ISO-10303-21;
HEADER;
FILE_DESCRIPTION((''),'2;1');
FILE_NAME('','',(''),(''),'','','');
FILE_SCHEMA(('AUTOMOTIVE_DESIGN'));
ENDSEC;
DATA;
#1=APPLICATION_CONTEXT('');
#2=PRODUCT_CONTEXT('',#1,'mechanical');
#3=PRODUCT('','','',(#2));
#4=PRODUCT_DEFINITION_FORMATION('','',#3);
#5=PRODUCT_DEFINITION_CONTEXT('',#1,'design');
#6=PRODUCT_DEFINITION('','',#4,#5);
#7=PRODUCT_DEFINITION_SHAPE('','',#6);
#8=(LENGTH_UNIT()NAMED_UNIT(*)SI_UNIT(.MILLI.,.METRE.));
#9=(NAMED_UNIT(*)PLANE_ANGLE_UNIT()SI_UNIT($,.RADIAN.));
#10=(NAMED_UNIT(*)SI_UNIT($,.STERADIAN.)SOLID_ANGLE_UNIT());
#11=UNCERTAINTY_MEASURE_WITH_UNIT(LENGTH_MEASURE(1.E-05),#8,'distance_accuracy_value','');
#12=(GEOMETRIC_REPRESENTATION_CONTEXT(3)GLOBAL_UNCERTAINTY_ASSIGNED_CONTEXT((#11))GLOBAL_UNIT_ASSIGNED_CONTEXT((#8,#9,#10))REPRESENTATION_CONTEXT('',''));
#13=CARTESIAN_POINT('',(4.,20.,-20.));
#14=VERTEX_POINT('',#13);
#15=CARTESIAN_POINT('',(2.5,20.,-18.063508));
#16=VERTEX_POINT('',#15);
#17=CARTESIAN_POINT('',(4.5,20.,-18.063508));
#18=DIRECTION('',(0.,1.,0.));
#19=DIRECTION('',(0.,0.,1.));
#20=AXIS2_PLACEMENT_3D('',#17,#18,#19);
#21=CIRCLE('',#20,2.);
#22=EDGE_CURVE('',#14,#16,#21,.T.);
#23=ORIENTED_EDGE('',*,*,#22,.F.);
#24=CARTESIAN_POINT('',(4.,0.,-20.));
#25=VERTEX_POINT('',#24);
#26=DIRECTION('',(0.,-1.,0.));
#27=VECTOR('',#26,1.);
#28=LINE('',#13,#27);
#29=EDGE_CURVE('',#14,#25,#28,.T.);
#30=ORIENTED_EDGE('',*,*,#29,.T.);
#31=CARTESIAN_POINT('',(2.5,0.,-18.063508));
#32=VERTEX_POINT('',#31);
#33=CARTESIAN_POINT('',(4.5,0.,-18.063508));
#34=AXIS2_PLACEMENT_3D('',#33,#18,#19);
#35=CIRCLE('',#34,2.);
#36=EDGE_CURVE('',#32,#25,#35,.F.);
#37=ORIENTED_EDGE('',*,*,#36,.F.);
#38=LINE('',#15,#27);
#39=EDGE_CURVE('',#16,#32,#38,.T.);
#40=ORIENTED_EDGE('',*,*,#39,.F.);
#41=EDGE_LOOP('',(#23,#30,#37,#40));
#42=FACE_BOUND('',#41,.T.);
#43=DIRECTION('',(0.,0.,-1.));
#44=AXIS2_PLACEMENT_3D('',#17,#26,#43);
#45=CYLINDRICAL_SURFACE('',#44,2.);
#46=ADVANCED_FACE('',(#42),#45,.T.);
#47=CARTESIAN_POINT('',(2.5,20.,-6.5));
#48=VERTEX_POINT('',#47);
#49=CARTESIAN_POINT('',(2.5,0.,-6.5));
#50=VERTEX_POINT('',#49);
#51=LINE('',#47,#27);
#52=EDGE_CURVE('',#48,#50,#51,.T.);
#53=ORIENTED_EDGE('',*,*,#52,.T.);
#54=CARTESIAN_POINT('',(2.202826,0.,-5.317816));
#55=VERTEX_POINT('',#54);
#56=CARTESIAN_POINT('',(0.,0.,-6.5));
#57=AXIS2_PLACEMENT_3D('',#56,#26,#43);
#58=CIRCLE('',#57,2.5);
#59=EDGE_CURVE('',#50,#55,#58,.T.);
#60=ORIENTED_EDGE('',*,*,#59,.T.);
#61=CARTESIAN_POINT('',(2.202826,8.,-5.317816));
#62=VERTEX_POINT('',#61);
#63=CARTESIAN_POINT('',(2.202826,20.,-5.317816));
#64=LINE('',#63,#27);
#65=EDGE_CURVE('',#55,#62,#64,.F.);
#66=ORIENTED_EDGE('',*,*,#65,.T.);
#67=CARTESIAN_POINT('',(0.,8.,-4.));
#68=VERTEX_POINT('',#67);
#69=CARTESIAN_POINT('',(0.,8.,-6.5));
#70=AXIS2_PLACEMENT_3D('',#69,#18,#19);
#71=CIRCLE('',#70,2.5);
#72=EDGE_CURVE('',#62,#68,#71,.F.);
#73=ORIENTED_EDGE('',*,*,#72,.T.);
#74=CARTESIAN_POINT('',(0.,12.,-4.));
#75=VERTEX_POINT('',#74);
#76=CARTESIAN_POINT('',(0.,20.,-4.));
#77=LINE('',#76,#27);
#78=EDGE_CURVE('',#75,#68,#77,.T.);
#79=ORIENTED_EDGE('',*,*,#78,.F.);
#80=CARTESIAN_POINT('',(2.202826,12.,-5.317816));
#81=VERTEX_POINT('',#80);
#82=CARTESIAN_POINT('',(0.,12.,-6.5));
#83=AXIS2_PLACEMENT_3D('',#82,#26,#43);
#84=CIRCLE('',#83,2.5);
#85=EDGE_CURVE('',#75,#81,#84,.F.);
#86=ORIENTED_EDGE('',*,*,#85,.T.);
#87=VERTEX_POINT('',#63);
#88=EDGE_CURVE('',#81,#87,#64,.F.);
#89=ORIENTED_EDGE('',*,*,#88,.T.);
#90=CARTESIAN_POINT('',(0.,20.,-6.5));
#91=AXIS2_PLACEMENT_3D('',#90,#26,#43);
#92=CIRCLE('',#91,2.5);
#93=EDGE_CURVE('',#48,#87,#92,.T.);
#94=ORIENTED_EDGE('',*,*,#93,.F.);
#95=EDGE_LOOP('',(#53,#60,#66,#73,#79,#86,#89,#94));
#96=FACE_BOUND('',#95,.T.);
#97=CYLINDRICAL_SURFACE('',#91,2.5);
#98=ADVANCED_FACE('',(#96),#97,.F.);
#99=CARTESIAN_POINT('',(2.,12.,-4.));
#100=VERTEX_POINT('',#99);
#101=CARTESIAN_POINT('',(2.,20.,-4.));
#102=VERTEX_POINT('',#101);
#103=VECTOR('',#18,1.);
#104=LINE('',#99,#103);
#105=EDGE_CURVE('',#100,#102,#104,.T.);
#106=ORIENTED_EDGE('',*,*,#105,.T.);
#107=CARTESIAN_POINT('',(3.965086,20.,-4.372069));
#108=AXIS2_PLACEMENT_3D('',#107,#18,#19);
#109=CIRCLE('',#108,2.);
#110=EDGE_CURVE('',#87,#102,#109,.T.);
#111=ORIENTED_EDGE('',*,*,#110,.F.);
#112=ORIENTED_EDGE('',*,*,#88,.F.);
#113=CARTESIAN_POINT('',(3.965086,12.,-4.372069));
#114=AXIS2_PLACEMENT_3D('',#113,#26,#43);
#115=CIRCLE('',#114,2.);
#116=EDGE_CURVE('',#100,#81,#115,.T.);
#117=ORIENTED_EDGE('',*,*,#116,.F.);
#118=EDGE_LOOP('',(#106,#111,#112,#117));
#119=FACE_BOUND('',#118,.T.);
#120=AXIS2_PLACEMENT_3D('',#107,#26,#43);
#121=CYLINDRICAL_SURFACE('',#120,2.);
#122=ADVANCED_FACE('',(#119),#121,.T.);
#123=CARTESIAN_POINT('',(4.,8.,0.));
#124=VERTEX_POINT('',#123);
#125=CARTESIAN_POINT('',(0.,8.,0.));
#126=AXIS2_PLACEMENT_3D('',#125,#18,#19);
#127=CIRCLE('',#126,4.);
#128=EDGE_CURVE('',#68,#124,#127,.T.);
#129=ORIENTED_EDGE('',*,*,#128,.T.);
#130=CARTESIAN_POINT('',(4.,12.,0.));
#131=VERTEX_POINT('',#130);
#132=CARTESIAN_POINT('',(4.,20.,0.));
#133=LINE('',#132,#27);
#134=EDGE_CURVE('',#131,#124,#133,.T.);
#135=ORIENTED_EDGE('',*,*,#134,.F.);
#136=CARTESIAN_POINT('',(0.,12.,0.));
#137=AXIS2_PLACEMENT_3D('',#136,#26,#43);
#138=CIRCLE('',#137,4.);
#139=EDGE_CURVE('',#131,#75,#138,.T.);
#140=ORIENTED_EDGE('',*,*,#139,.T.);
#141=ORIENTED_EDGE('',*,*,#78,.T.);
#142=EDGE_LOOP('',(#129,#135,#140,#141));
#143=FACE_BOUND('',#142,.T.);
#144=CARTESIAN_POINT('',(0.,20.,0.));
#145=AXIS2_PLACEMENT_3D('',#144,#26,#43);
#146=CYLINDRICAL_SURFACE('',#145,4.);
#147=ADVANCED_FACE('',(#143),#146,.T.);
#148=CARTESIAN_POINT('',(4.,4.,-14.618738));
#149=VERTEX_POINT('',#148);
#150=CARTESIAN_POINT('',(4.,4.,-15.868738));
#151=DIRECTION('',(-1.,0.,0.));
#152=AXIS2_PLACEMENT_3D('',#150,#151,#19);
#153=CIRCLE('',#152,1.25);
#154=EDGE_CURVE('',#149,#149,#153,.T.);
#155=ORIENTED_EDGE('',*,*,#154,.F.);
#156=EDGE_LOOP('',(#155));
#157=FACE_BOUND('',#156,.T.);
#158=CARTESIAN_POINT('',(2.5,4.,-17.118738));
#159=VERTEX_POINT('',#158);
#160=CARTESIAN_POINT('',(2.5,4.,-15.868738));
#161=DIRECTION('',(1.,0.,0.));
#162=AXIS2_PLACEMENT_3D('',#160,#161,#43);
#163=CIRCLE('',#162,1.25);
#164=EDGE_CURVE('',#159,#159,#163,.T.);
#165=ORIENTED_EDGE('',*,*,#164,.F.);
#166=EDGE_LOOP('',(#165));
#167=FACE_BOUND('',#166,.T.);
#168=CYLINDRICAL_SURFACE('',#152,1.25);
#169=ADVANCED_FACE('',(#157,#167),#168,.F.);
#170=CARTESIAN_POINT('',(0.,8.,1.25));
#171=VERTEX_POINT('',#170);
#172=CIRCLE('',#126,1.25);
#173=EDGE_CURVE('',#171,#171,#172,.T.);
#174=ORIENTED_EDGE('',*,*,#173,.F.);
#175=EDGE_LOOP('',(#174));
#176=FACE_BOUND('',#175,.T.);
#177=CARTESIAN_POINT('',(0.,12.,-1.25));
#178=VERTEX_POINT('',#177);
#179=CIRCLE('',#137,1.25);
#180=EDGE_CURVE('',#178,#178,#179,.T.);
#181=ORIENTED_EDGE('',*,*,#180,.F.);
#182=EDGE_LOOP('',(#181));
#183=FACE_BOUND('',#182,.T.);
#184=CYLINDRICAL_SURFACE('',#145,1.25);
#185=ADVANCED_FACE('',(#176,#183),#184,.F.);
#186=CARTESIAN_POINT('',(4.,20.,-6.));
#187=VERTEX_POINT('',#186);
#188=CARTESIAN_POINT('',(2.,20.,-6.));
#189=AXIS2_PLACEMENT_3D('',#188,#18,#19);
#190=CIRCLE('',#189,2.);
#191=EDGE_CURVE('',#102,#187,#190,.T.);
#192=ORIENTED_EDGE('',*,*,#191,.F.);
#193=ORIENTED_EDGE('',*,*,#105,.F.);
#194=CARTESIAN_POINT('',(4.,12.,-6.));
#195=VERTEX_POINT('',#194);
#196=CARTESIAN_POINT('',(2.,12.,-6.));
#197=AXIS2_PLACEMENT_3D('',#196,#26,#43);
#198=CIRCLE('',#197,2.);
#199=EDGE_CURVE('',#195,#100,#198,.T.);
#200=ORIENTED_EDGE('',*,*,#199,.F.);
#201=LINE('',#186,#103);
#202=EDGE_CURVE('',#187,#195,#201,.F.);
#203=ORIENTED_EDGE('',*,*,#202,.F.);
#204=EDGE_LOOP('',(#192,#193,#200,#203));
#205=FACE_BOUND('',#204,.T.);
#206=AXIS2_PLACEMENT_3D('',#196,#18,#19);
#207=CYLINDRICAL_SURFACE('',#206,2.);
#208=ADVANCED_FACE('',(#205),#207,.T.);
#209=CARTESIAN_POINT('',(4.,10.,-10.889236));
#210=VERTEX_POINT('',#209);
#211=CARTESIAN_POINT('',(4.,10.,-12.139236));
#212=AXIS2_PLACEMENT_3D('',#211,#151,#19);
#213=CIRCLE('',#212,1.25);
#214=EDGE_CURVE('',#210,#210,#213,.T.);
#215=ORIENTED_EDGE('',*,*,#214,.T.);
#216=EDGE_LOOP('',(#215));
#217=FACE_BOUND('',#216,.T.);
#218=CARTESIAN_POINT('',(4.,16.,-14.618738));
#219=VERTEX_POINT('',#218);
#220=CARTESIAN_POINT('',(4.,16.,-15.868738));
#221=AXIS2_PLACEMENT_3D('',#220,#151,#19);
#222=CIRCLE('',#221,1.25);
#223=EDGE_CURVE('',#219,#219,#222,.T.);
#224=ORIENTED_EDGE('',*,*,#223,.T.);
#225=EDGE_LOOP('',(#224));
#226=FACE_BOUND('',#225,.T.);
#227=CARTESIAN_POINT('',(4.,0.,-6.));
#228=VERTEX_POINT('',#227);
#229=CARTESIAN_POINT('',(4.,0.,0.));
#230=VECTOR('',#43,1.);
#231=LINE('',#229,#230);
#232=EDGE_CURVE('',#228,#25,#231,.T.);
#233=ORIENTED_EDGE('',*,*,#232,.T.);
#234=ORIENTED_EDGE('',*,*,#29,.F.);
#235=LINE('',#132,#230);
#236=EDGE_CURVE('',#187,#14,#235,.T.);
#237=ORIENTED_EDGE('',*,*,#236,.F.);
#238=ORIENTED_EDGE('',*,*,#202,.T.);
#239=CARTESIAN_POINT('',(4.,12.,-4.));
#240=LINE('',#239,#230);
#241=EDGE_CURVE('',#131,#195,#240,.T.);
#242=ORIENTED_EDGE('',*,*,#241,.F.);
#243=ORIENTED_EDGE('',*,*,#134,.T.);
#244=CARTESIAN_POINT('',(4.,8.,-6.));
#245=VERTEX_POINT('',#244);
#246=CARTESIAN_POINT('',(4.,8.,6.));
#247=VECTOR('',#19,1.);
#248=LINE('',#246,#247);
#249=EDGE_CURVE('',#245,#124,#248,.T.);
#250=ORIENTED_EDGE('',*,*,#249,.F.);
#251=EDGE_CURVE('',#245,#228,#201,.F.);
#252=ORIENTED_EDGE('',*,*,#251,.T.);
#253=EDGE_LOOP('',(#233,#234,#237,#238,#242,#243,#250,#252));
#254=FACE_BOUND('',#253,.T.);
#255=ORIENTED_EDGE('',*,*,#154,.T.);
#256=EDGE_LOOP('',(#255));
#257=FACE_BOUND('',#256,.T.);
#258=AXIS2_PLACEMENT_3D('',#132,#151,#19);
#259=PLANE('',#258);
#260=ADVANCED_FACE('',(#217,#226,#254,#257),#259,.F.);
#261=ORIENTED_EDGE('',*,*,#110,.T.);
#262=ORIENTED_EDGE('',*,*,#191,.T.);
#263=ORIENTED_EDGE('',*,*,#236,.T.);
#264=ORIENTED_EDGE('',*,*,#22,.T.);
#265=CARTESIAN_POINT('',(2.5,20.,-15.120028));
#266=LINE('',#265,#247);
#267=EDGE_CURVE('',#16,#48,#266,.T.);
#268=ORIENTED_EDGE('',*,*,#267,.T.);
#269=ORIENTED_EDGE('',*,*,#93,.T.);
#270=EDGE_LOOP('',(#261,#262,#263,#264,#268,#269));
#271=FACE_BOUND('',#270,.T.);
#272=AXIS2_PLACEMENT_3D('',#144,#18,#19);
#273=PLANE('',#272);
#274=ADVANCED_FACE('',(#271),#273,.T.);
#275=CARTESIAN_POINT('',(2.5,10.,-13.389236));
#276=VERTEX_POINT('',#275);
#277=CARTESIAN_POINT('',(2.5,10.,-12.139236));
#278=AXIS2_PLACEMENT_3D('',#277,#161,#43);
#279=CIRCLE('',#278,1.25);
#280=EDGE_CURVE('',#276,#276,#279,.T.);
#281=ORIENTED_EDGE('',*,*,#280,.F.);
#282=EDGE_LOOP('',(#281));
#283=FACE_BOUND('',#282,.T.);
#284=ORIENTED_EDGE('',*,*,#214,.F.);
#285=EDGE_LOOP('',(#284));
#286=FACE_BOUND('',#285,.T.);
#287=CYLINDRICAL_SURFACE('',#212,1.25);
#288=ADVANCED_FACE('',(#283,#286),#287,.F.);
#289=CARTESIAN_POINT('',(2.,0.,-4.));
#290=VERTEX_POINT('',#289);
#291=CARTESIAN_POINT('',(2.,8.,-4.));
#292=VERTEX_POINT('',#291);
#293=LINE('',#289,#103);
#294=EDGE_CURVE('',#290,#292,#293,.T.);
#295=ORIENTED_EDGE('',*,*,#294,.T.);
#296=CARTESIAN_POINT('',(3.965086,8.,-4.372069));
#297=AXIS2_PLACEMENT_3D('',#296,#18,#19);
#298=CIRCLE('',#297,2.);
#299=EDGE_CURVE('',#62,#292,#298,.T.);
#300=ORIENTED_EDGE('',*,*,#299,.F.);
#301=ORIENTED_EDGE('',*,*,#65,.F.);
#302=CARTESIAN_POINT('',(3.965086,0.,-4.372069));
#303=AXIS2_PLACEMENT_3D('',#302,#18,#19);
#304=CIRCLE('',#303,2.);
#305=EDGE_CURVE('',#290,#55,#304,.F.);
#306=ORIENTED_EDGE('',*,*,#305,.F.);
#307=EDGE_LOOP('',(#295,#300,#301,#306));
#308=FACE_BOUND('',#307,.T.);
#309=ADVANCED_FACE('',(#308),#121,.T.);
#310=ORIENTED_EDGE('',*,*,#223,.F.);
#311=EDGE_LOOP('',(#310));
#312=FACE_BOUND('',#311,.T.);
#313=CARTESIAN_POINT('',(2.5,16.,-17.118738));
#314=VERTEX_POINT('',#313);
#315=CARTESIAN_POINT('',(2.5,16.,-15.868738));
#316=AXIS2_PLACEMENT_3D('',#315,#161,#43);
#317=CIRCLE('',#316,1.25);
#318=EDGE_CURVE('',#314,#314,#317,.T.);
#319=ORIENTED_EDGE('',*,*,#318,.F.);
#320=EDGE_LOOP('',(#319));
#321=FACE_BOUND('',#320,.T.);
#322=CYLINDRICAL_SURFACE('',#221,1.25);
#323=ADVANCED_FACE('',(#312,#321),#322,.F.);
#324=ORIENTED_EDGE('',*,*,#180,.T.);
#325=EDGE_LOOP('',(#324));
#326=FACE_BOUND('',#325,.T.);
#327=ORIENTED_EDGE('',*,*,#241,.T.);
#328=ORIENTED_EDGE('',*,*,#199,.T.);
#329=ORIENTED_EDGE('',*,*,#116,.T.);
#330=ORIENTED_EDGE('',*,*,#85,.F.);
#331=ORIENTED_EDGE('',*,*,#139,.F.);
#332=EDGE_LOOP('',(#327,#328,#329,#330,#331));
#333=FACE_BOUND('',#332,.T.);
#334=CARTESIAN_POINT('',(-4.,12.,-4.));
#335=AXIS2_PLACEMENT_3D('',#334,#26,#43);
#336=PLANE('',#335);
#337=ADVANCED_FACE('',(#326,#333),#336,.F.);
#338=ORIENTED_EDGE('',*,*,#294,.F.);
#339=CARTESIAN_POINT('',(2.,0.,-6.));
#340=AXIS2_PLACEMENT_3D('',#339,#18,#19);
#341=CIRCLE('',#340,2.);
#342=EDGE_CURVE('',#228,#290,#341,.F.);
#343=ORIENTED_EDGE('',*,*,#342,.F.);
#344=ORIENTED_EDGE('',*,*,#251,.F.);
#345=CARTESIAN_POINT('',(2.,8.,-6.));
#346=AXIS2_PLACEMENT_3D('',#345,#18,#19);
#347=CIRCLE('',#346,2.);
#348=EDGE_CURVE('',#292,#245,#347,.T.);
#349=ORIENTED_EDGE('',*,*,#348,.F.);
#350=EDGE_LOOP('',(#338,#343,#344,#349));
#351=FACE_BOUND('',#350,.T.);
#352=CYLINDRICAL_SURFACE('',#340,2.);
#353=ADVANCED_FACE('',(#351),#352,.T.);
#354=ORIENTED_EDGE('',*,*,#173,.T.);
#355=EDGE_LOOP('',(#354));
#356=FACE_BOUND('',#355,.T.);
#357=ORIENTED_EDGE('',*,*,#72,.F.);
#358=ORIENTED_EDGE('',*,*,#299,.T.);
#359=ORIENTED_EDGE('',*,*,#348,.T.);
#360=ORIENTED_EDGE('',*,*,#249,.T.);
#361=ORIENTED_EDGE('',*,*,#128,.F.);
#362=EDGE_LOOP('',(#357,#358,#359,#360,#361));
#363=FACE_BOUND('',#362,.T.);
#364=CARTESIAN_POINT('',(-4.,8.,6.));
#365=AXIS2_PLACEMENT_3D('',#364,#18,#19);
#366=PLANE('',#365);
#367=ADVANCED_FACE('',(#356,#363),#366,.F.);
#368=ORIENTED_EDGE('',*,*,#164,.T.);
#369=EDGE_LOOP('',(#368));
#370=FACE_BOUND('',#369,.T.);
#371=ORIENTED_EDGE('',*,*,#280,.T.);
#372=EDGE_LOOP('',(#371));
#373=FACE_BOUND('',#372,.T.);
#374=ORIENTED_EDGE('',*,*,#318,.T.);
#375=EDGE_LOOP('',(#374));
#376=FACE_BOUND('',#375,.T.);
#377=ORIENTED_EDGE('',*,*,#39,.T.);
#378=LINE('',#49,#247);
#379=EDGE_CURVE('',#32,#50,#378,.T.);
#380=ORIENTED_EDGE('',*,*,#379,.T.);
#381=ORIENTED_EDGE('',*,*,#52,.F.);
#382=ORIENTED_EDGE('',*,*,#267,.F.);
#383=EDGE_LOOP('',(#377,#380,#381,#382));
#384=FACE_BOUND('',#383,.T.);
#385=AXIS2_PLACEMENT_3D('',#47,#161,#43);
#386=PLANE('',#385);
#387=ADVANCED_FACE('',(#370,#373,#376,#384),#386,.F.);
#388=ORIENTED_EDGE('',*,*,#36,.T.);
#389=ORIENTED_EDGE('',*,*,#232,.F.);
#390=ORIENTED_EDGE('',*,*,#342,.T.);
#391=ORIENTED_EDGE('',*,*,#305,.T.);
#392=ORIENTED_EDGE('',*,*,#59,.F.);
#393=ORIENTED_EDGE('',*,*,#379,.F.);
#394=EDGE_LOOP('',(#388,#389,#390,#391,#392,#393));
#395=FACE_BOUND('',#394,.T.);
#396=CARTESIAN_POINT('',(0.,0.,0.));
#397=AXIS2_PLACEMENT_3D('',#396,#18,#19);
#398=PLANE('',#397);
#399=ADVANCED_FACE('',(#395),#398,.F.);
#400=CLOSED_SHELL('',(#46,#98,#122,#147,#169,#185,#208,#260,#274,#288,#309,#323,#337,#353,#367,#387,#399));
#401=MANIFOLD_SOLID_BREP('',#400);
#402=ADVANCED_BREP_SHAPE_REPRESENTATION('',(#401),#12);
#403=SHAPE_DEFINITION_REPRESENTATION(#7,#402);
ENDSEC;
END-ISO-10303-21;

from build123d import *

# Parameters (mm, degrees)
SKETCH1_R               = 1.25
BOSS_EXTRUDE1_DEPTH     = 20
CUT_EXTRUDE1_DEPTH      = 30.021543722
CUT_EXTRUDE1_DEPTH_BACK = 30.021543722
SKETCH2_R               = 1.25
CUT_EXTRUDE3_DEPTH      = 29.565713714
CUT_EXTRUDE3_DEPTH_BACK = 29.565713714
SKETCH3_W               = 10
SKETCH3_H               = 8
SKETCH3_W_2             = 9.357078711
FILLET3_R               = 2
FILLET4_R               = 2
FILLET8_R               = 2
FILLET9_R               = 2
FILLET11_R              = 2


with BuildPart() as part:
    # Sketch1 → Boss-Extrude1 (new body)
    with BuildSketch(Plane(origin=(0, 0, 0), x_dir=(1, 0, 0), z_dir=(0, 1, 0))):
        with BuildLine():
            Line((4, 0), (4, 20))
            Line((4, 20), (2.5, 20))
            Line((2.5, 20), (2.5, 15.120027663))
            Line((2.5, 15.120027663), (2.5, 6.5))
            ThreePointArc((2.5, 6.5), (1.767766953, 4.732233047), (0, 4))
            ThreePointArc((0, 4), (-2.828427125, -2.828427125), (4, 0))
        make_face()
        with Locations(Location((0, 0, 0), (0, 0, 270))):
            Circle(SKETCH1_R, mode=Mode.SUBTRACT)
    extrude(amount=BOSS_EXTRUDE1_DEPTH)

    # Sketch2 → Cut-Extrude1 (cut, two sides: drawn at the far end of the back side and taken through both)
    with BuildSketch(Plane.ZY.offset(-2.5).offset(-CUT_EXTRUDE1_DEPTH_BACK)):
        with Locations((-12.139236455, 10)):
            Circle(SKETCH2_R)
        with Locations((-15.86873762, 4)):
            Circle(SKETCH2_R)
        with Locations((-15.86873762, 16)):
            Circle(SKETCH2_R)
    extrude(amount=CUT_EXTRUDE1_DEPTH + CUT_EXTRUDE1_DEPTH_BACK, mode=Mode.SUBTRACT)

    # Sketch3 → Cut-Extrude3 (cut, two sides: drawn at the far end of the back side and taken through both)
    with BuildSketch(Plane(origin=(0, 0, 0), x_dir=(0, 0, -1), z_dir=(1, 0, 0)).offset(-CUT_EXTRUDE3_DEPTH_BACK)):
        with Locations((-1, 4)):
            Rectangle(SKETCH3_W, SKETCH3_H)
        with Locations((-0.678539356, 16)):
            Rectangle(SKETCH3_W_2, SKETCH3_H)
    extrude(amount=CUT_EXTRUDE3_DEPTH + CUT_EXTRUDE3_DEPTH_BACK, mode=Mode.SUBTRACT)

    # Fillet3
    fillet3_edges = [part.edges().sort_by_distance(p)[0] for p in [
        (4, 16, -4),
    ]]
    fillet(fillet3_edges, radius=FILLET3_R)

    # Fillet4
    # the kernel refuses this fillet: 2 mm, written as the material it takes off along each edge
    with BuildSketch(Plane(origin=(0, 12, -4), x_dir=(0.8581589387978472, 0, -0.513384101586086), z_dir=(0, 1, 0))) as fillet4_piece_1:
        with BuildLine():
            CenterArc((3.593688711, -1.716317878), FILLET4_R, 120.889507128, 38.942441269)
            Line((1.716317878, -1.026768203), (0, 0))
            ThreePointArc((0, 0), (1.283460254, -0.354602653), (2.566920508, 0))
        make_face()
    extrude(amount=14.41730127, mode=Mode.SUBTRACT)

    # Fillet8
    fillet8_edges = [part.edges().sort_by_distance(p)[0] for p in [
        (4, 4, -4),
    ]]
    fillet(fillet8_edges, radius=FILLET8_R)

    # Fillet9
    # the kernel refuses this fillet: 2 mm, written as the material it takes off along each edge
    with BuildSketch(Plane(origin=(0, -6.41730127, -4), x_dir=(0.8581589387978472, 0, -0.513384101586086), z_dir=(0, 1, 0))) as fillet9_piece_1:
        with BuildLine():
            CenterArc((3.593688711, -1.716317878), FILLET9_R, 120.889507128, 38.942441269)
            Line((1.716317878, -1.026768203), (1.678770461, -1.01297721))
            ThreePointArc((1.678770461, -1.01297721), (0.837623575, -0.547710459), (-0.020535364, -0.034326358))
            Line((-0.020535364, -0.034326358), (0.020535364, 0.034326358))
            ThreePointArc((0.020535364, 0.034326358), (1.283460254, -0.314602653), (2.546385144, 0.034326358))
            Line((2.546385144, 0.034326358), (2.566920508, 0))
        make_face()
    extrude(amount=14.41730127, mode=Mode.SUBTRACT)

    # Fillet11
    # the kernel refuses this fillet: 2 mm, written as the material it takes off along each edge
    with BuildSketch(Plane(origin=(2.5, -4.841229183, -20), x_dir=(1, 0, 0), z_dir=(0, 1, 0))) as fillet11_piece_1:
        with BuildLine():
            CenterArc((2, -1.936491673), FILLET11_R, 104.477512186, 75.522487814)
            Line((0, -1.936491673), (-0.04, -1.936491673))
            Line((-0.04, -1.936491673), (-0.04, 0))
            Line((-0.04, 0), (0, 0.04))
            ThreePointArc((0, 0.04), (0.75, 0.04), (1.49, 0.038729833))
            Line((1.49, 0.038729833), (1.5, 0))
        make_face()
    extrude(amount=29.682458366, mode=Mode.SUBTRACT)


solid = part.part
